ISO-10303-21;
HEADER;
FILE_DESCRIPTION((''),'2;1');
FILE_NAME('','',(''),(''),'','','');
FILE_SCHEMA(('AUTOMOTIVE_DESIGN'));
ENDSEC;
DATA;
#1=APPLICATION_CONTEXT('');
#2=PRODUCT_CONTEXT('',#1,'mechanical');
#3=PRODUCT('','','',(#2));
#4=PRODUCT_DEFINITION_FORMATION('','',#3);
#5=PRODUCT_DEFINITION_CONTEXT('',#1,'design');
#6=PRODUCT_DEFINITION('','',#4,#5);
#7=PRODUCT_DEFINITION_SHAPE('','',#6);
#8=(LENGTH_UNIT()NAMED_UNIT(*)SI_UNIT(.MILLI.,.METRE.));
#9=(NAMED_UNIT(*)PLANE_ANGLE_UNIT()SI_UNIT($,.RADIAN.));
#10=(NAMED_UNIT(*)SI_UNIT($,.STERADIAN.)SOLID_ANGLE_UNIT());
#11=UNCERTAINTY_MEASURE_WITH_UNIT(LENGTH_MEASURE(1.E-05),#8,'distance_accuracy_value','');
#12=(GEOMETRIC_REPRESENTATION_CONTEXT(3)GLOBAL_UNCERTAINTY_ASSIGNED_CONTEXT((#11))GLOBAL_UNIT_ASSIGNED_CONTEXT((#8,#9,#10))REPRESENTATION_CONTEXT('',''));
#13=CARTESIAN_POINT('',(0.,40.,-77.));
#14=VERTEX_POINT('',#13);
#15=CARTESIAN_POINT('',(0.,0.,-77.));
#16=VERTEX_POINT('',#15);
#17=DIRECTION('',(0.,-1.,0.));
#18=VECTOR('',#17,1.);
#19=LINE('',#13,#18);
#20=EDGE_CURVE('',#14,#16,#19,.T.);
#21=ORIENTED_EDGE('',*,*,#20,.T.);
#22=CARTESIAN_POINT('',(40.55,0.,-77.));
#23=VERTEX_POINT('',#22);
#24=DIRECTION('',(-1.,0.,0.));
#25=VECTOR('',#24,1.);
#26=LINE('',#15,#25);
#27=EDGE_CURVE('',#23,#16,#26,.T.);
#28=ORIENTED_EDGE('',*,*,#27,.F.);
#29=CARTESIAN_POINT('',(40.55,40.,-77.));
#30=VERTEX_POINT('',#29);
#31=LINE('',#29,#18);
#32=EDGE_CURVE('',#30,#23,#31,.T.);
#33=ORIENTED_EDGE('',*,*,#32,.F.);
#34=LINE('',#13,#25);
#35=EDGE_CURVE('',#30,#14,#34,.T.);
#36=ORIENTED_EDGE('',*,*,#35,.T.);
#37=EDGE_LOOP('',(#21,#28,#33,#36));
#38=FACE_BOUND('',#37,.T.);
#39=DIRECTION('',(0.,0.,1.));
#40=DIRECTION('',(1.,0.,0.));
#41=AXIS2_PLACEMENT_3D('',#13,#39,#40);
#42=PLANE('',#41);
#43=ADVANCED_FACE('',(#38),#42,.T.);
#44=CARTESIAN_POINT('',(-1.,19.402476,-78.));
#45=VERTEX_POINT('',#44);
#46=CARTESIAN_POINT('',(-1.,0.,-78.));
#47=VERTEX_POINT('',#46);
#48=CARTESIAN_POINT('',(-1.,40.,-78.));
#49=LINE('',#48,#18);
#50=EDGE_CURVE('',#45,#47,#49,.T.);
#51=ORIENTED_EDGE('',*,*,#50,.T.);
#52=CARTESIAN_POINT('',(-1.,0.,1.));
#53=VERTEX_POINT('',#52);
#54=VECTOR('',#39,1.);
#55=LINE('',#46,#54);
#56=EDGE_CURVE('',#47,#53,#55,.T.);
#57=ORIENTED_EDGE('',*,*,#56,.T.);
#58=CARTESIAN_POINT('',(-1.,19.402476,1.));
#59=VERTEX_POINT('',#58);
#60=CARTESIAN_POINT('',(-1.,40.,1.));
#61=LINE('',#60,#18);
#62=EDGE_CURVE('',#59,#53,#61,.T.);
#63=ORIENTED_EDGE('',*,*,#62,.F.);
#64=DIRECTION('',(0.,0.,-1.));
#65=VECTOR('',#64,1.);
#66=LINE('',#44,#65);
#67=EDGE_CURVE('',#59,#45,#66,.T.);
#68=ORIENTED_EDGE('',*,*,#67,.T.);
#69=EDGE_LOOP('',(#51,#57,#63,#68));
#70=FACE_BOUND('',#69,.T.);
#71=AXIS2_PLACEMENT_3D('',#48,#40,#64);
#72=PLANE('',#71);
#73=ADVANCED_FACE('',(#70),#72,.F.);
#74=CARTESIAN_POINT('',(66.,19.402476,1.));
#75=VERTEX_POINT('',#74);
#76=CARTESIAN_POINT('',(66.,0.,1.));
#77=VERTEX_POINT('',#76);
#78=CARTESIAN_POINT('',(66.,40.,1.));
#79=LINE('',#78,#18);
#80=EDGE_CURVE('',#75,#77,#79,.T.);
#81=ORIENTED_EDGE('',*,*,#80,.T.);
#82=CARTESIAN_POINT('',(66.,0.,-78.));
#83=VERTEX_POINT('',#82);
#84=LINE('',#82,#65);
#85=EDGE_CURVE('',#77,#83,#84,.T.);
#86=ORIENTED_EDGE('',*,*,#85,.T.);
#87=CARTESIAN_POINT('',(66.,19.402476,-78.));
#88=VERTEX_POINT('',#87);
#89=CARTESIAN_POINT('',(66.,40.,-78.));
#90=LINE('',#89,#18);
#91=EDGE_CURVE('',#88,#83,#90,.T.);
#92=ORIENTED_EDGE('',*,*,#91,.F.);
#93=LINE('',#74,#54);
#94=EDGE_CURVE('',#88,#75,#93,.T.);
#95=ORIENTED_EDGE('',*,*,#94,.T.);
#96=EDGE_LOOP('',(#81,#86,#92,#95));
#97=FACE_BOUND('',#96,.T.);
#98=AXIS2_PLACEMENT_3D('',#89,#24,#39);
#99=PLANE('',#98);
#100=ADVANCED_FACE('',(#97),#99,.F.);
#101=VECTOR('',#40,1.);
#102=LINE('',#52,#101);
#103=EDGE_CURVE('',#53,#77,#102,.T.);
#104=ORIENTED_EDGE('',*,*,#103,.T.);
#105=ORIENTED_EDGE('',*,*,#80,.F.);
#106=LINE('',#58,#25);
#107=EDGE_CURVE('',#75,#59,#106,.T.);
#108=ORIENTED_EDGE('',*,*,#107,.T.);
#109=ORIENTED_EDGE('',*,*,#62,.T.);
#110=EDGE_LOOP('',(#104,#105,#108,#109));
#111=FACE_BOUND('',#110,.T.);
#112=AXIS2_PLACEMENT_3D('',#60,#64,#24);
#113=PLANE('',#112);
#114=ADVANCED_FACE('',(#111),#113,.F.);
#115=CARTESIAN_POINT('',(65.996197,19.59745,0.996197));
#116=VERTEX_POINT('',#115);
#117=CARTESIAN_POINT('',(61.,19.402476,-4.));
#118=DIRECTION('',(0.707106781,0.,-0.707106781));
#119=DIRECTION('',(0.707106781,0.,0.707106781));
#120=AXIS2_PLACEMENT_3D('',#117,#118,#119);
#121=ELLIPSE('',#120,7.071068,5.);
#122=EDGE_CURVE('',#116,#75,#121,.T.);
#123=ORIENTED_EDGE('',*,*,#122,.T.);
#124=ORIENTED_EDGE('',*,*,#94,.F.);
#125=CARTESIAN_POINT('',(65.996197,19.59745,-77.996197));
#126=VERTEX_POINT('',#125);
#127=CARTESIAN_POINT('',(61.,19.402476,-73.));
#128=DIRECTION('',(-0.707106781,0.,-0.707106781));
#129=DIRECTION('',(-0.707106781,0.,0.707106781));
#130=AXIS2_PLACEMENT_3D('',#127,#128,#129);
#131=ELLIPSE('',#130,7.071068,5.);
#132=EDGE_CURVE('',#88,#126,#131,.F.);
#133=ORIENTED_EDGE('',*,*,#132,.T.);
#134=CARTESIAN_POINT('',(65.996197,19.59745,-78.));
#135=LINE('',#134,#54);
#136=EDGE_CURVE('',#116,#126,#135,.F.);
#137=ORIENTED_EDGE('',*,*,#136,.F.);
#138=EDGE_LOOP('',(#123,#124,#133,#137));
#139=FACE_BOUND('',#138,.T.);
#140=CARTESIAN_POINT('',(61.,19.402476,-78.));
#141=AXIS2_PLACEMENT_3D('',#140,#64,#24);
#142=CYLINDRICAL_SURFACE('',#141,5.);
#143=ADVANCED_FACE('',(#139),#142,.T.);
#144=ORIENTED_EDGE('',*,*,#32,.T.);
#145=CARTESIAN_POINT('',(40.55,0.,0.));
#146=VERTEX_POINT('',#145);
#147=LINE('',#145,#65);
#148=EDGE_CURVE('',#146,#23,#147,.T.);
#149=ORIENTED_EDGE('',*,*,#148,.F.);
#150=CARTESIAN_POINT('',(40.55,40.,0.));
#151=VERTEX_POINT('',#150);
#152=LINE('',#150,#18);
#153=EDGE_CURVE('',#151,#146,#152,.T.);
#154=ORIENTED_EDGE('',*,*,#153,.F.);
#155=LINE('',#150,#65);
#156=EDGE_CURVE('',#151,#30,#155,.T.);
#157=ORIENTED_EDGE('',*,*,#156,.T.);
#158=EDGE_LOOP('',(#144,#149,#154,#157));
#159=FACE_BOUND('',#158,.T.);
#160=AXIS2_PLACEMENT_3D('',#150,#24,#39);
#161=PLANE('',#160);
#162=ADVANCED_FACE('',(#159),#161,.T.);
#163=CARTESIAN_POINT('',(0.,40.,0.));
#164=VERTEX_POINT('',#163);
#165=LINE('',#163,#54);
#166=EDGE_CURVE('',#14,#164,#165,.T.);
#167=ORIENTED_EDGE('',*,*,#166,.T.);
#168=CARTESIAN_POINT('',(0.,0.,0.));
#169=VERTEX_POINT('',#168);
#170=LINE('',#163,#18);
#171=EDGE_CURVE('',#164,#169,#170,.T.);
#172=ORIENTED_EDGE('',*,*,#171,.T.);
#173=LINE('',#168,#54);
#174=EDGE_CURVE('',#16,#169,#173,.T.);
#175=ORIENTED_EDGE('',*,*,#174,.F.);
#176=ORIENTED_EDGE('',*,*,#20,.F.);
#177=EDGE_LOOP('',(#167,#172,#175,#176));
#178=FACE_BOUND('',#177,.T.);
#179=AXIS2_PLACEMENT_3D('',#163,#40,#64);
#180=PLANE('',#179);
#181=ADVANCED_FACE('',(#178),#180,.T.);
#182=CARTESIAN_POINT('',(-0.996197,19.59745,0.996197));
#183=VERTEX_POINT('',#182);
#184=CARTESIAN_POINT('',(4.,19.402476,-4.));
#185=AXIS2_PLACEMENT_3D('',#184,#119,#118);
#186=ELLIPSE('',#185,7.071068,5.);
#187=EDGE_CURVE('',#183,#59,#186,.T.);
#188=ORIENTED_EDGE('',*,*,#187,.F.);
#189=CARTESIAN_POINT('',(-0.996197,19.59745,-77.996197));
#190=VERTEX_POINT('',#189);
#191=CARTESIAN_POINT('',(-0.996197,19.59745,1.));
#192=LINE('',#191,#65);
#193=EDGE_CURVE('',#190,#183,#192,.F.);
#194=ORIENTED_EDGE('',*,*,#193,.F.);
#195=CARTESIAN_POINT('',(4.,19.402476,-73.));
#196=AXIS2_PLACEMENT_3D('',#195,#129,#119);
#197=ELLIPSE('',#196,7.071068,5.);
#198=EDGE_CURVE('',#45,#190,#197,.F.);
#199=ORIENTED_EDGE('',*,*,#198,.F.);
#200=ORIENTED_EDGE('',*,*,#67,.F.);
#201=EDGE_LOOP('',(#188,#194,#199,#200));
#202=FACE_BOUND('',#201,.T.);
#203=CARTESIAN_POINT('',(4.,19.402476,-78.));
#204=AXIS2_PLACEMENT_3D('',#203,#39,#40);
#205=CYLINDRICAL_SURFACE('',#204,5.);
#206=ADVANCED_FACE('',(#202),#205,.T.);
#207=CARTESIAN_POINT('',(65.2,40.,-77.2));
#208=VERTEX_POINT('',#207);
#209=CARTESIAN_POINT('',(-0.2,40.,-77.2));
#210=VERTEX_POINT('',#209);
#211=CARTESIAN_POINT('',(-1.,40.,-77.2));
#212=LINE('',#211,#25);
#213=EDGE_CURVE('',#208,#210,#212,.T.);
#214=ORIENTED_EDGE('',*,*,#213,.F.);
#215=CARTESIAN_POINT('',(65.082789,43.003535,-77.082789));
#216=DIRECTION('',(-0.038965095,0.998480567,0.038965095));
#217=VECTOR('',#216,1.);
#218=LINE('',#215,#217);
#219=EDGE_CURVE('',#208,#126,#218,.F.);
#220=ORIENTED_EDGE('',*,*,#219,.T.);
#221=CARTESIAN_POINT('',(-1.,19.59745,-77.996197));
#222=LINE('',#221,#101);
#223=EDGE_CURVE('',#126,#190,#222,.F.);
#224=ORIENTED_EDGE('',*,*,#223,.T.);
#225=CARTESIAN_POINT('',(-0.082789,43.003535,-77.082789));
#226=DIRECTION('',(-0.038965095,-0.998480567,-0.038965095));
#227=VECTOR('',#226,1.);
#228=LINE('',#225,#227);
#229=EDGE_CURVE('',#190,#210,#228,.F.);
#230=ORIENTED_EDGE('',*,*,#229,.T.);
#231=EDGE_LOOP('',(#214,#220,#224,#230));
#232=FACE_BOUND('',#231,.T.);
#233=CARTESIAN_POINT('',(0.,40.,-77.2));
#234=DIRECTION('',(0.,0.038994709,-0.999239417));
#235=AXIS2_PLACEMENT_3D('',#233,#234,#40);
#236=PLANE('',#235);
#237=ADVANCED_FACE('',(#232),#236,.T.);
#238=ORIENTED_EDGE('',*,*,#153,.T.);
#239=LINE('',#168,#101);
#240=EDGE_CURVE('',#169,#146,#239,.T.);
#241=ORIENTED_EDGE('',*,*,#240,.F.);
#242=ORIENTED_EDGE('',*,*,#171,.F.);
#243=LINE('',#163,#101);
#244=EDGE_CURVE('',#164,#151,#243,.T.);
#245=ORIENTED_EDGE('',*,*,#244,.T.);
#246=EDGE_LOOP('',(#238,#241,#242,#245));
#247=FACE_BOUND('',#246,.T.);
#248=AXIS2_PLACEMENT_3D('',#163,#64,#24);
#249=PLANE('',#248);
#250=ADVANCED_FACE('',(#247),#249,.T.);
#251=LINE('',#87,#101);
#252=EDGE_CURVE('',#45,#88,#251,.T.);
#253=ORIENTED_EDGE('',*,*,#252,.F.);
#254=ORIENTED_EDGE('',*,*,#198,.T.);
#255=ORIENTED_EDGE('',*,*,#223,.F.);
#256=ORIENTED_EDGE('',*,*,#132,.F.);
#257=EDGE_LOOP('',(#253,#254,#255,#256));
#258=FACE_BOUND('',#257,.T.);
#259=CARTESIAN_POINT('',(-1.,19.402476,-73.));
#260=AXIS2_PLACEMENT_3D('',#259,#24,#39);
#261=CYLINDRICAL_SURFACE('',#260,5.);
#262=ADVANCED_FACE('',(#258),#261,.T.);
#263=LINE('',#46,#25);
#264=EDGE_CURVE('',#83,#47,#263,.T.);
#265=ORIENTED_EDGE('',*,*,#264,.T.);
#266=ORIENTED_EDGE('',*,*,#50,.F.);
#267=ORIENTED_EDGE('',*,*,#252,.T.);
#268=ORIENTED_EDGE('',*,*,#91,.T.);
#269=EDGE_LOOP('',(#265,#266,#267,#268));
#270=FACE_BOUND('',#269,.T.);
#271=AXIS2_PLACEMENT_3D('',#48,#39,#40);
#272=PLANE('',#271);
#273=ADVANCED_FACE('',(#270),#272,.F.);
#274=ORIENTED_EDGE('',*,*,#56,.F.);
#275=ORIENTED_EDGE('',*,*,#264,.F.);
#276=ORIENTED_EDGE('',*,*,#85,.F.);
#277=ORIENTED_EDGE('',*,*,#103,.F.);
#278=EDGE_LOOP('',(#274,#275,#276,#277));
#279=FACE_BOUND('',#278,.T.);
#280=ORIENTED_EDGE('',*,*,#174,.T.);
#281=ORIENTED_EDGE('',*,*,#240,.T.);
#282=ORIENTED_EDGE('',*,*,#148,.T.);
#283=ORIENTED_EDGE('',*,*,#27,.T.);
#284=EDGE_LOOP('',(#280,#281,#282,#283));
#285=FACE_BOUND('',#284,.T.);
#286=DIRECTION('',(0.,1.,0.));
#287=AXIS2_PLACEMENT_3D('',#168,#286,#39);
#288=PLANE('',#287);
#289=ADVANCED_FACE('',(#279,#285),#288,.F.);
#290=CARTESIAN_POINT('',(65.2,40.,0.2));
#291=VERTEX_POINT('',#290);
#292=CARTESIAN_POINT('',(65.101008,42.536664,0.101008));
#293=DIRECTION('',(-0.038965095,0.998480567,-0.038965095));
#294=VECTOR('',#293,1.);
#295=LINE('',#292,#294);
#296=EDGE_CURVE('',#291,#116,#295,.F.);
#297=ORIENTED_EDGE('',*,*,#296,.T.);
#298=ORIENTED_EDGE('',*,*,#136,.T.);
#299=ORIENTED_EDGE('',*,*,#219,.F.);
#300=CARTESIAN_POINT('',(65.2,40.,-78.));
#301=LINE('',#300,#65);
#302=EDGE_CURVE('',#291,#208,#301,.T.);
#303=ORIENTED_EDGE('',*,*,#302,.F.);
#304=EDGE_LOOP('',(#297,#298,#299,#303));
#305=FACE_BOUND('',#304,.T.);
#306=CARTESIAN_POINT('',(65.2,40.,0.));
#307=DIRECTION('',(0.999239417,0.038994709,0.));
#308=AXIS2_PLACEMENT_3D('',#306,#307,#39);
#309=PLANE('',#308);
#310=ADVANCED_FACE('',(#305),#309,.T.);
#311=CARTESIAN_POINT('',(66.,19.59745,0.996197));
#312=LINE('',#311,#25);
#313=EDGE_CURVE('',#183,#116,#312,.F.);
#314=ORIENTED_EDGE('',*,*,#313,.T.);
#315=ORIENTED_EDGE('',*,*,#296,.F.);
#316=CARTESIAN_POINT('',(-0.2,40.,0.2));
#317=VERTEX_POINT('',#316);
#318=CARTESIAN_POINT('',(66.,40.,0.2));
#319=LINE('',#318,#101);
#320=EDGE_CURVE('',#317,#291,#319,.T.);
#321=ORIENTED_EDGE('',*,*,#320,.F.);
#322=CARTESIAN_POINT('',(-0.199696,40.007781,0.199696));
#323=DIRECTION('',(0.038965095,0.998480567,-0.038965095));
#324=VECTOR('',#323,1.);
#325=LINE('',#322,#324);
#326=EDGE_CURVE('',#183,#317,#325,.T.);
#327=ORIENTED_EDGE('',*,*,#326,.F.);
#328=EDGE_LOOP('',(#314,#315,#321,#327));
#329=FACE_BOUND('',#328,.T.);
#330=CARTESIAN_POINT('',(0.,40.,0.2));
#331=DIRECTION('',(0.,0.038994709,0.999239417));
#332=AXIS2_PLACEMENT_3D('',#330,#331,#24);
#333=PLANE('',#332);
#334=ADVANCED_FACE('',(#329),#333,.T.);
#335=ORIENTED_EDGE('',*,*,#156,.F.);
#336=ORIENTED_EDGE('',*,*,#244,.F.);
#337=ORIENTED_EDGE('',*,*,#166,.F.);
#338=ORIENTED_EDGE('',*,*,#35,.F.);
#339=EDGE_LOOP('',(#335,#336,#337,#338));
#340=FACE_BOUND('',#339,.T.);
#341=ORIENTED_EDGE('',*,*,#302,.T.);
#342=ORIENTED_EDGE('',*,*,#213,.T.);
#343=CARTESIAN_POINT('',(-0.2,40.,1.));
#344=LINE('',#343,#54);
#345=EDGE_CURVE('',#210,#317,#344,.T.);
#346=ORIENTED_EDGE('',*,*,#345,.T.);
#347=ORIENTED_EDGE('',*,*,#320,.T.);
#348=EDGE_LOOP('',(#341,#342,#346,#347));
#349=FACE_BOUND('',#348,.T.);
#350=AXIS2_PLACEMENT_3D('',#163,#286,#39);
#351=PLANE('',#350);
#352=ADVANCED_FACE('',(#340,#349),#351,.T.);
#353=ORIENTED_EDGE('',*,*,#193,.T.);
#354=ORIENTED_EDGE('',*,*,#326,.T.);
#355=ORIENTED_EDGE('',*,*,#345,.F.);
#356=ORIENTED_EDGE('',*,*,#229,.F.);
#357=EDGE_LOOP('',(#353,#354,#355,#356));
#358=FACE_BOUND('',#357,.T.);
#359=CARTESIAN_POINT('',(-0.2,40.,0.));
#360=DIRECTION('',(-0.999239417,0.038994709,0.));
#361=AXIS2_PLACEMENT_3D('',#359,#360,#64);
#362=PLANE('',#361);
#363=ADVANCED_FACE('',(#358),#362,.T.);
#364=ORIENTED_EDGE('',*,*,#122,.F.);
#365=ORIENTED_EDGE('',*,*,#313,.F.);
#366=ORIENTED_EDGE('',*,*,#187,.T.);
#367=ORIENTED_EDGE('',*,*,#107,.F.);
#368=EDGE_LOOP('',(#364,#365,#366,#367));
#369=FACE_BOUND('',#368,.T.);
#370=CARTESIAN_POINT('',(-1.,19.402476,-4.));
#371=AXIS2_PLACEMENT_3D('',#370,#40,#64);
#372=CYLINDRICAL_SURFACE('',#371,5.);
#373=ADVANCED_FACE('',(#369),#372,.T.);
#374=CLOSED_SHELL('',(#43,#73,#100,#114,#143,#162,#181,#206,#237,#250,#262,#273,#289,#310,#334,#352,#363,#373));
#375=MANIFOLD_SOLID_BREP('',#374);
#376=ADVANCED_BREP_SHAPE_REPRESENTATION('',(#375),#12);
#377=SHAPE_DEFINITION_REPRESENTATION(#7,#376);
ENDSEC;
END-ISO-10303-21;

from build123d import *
from OCP.BRepFilletAPI import BRepFilletAPI_MakeChamfer

# Parameters (mm, degrees)
SKIZZE1_W                       = 67
SKIZZE1_H                       = 79
SKIZZE1_W_2                     = 40.55
SKIZZE1_H_2                     = 77
AUFSATZ_LINEAR_AUSTRAGEN2_DEPTH = 40
FASE1_SIZE                      = 20.5
FASE1_SIZE2                     = 0.8
VERRUNDUNG2_R                   = 5


with BuildPart() as part:
    # Skizze1 → Aufsatz-Linear austragen2 (new body)
    with BuildSketch(Plane(origin=(0, 0, 0), x_dir=(1, 0, 0), z_dir=(0, 1, 0))):
        with Locations((32.5, 38.5)):
            Rectangle(SKIZZE1_W, SKIZZE1_H)
        with Locations((20.275, 38.5)):
            Rectangle(SKIZZE1_W_2, SKIZZE1_H_2, mode=Mode.SUBTRACT)
    extrude(amount=AUFSATZ_LINEAR_AUSTRAGEN2_DEPTH)

    # Fase1: one chamfer whose edges measure the first distance from different faces: ONE call of the kernel's chamfer builder (chamfer() names one face for all edges)
    fase1_edges_1 = [part.edges().sort_by_distance(p)[0] for p in [
        (66, 40, -38.5),
    ]]
    fase1_side_1 = [part.faces().sort_by_distance(p)[0] for p in [
        (66, 20, -38.5),
    ]]
    fase1_edges_2 = [part.edges().sort_by_distance(p)[0] for p in [
        (32.5, 40, -78),
    ]]
    fase1_side_2 = [part.faces().sort_by_distance(p)[0] for p in [
        (32.5, 20, -78),
    ]]
    fase1_edges_3 = [part.edges().sort_by_distance(p)[0] for p in [
        (-1, 40, -38.5),
    ]]
    fase1_side_3 = [part.faces().sort_by_distance(p)[0] for p in [
        (-1, 20, -38.5),
    ]]
    fase1_edges_4 = [part.edges().sort_by_distance(p)[0] for p in [
        (32.5, 40, 1),
    ]]
    fase1_side_4 = [part.faces().sort_by_distance(p)[0] for p in [
        (32.5, 20, 1),
    ]]
    fase1 = BRepFilletAPI_MakeChamfer(part.part.solid().wrapped)
    for e in fase1_edges_1:
        fase1.Add(FASE1_SIZE, FASE1_SIZE2, e.wrapped, fase1_side_1[0].wrapped)  # the first distance lies on this face
    for e in fase1_edges_2:
        fase1.Add(FASE1_SIZE, FASE1_SIZE2, e.wrapped, fase1_side_2[0].wrapped)  # the first distance lies on this face
    for e in fase1_edges_3:
        fase1.Add(FASE1_SIZE, FASE1_SIZE2, e.wrapped, fase1_side_3[0].wrapped)  # the first distance lies on this face
    for e in fase1_edges_4:
        fase1.Add(FASE1_SIZE, FASE1_SIZE2, e.wrapped, fase1_side_4[0].wrapped)  # the first distance lies on this face
    add(Compound.cast(fase1.Shape()), mode=Mode.REPLACE)

    # Verrundung2
    # the kernel refuses this fillet: 5 mm, written as the material it takes off along each edge
    with BuildSketch(Plane(origin=(-1.24380965, 19.5, -78), x_dir=(0, -1, 0), z_dir=(1, 0, 0)), Plane(origin=(66.24380965, 19.5, 1), x_dir=(0, -1, 0), z_dir=(-1, 0, 0))) as verrundung2_piece_1:
        with BuildLine():
            CenterArc((VERRUNDUNG2_R * 0.019504771978, -VERRUNDUNG2_R), VERRUNDUNG2_R, 90, 2.234798859)
            Line((-VERRUNDUNG2_R * 0.0194899369818, -VERRUNDUNG2_R * 0.000760582906605), (0, 0))
            Line((0, 0), (VERRUNDUNG2_R * 0.019504771978, 0))
        make_face()
    extrude(amount=67.487619299, mode=Mode.SUBTRACT)
    with BuildSketch(Plane(origin=(66, 19.5, -78.24380965), x_dir=(0, -1, 0), z_dir=(0, 0, 1)), Plane(origin=(-1, 19.5, 1.24380965), x_dir=(0, -1, 0), z_dir=(0, 0, -1))) as verrundung2_piece_2:
        with BuildLine():
            CenterArc((VERRUNDUNG2_R * 0.019504771978, -VERRUNDUNG2_R), VERRUNDUNG2_R, 90, 2.234798859)
            Line((-VERRUNDUNG2_R * 0.0194899369818, -VERRUNDUNG2_R * 0.000760582906605), (0, 0))
            Line((0, 0), (VERRUNDUNG2_R * 0.019504771978, 0))
        make_face()
    extrude(amount=79.487619299, mode=Mode.SUBTRACT)


solid = part.part
